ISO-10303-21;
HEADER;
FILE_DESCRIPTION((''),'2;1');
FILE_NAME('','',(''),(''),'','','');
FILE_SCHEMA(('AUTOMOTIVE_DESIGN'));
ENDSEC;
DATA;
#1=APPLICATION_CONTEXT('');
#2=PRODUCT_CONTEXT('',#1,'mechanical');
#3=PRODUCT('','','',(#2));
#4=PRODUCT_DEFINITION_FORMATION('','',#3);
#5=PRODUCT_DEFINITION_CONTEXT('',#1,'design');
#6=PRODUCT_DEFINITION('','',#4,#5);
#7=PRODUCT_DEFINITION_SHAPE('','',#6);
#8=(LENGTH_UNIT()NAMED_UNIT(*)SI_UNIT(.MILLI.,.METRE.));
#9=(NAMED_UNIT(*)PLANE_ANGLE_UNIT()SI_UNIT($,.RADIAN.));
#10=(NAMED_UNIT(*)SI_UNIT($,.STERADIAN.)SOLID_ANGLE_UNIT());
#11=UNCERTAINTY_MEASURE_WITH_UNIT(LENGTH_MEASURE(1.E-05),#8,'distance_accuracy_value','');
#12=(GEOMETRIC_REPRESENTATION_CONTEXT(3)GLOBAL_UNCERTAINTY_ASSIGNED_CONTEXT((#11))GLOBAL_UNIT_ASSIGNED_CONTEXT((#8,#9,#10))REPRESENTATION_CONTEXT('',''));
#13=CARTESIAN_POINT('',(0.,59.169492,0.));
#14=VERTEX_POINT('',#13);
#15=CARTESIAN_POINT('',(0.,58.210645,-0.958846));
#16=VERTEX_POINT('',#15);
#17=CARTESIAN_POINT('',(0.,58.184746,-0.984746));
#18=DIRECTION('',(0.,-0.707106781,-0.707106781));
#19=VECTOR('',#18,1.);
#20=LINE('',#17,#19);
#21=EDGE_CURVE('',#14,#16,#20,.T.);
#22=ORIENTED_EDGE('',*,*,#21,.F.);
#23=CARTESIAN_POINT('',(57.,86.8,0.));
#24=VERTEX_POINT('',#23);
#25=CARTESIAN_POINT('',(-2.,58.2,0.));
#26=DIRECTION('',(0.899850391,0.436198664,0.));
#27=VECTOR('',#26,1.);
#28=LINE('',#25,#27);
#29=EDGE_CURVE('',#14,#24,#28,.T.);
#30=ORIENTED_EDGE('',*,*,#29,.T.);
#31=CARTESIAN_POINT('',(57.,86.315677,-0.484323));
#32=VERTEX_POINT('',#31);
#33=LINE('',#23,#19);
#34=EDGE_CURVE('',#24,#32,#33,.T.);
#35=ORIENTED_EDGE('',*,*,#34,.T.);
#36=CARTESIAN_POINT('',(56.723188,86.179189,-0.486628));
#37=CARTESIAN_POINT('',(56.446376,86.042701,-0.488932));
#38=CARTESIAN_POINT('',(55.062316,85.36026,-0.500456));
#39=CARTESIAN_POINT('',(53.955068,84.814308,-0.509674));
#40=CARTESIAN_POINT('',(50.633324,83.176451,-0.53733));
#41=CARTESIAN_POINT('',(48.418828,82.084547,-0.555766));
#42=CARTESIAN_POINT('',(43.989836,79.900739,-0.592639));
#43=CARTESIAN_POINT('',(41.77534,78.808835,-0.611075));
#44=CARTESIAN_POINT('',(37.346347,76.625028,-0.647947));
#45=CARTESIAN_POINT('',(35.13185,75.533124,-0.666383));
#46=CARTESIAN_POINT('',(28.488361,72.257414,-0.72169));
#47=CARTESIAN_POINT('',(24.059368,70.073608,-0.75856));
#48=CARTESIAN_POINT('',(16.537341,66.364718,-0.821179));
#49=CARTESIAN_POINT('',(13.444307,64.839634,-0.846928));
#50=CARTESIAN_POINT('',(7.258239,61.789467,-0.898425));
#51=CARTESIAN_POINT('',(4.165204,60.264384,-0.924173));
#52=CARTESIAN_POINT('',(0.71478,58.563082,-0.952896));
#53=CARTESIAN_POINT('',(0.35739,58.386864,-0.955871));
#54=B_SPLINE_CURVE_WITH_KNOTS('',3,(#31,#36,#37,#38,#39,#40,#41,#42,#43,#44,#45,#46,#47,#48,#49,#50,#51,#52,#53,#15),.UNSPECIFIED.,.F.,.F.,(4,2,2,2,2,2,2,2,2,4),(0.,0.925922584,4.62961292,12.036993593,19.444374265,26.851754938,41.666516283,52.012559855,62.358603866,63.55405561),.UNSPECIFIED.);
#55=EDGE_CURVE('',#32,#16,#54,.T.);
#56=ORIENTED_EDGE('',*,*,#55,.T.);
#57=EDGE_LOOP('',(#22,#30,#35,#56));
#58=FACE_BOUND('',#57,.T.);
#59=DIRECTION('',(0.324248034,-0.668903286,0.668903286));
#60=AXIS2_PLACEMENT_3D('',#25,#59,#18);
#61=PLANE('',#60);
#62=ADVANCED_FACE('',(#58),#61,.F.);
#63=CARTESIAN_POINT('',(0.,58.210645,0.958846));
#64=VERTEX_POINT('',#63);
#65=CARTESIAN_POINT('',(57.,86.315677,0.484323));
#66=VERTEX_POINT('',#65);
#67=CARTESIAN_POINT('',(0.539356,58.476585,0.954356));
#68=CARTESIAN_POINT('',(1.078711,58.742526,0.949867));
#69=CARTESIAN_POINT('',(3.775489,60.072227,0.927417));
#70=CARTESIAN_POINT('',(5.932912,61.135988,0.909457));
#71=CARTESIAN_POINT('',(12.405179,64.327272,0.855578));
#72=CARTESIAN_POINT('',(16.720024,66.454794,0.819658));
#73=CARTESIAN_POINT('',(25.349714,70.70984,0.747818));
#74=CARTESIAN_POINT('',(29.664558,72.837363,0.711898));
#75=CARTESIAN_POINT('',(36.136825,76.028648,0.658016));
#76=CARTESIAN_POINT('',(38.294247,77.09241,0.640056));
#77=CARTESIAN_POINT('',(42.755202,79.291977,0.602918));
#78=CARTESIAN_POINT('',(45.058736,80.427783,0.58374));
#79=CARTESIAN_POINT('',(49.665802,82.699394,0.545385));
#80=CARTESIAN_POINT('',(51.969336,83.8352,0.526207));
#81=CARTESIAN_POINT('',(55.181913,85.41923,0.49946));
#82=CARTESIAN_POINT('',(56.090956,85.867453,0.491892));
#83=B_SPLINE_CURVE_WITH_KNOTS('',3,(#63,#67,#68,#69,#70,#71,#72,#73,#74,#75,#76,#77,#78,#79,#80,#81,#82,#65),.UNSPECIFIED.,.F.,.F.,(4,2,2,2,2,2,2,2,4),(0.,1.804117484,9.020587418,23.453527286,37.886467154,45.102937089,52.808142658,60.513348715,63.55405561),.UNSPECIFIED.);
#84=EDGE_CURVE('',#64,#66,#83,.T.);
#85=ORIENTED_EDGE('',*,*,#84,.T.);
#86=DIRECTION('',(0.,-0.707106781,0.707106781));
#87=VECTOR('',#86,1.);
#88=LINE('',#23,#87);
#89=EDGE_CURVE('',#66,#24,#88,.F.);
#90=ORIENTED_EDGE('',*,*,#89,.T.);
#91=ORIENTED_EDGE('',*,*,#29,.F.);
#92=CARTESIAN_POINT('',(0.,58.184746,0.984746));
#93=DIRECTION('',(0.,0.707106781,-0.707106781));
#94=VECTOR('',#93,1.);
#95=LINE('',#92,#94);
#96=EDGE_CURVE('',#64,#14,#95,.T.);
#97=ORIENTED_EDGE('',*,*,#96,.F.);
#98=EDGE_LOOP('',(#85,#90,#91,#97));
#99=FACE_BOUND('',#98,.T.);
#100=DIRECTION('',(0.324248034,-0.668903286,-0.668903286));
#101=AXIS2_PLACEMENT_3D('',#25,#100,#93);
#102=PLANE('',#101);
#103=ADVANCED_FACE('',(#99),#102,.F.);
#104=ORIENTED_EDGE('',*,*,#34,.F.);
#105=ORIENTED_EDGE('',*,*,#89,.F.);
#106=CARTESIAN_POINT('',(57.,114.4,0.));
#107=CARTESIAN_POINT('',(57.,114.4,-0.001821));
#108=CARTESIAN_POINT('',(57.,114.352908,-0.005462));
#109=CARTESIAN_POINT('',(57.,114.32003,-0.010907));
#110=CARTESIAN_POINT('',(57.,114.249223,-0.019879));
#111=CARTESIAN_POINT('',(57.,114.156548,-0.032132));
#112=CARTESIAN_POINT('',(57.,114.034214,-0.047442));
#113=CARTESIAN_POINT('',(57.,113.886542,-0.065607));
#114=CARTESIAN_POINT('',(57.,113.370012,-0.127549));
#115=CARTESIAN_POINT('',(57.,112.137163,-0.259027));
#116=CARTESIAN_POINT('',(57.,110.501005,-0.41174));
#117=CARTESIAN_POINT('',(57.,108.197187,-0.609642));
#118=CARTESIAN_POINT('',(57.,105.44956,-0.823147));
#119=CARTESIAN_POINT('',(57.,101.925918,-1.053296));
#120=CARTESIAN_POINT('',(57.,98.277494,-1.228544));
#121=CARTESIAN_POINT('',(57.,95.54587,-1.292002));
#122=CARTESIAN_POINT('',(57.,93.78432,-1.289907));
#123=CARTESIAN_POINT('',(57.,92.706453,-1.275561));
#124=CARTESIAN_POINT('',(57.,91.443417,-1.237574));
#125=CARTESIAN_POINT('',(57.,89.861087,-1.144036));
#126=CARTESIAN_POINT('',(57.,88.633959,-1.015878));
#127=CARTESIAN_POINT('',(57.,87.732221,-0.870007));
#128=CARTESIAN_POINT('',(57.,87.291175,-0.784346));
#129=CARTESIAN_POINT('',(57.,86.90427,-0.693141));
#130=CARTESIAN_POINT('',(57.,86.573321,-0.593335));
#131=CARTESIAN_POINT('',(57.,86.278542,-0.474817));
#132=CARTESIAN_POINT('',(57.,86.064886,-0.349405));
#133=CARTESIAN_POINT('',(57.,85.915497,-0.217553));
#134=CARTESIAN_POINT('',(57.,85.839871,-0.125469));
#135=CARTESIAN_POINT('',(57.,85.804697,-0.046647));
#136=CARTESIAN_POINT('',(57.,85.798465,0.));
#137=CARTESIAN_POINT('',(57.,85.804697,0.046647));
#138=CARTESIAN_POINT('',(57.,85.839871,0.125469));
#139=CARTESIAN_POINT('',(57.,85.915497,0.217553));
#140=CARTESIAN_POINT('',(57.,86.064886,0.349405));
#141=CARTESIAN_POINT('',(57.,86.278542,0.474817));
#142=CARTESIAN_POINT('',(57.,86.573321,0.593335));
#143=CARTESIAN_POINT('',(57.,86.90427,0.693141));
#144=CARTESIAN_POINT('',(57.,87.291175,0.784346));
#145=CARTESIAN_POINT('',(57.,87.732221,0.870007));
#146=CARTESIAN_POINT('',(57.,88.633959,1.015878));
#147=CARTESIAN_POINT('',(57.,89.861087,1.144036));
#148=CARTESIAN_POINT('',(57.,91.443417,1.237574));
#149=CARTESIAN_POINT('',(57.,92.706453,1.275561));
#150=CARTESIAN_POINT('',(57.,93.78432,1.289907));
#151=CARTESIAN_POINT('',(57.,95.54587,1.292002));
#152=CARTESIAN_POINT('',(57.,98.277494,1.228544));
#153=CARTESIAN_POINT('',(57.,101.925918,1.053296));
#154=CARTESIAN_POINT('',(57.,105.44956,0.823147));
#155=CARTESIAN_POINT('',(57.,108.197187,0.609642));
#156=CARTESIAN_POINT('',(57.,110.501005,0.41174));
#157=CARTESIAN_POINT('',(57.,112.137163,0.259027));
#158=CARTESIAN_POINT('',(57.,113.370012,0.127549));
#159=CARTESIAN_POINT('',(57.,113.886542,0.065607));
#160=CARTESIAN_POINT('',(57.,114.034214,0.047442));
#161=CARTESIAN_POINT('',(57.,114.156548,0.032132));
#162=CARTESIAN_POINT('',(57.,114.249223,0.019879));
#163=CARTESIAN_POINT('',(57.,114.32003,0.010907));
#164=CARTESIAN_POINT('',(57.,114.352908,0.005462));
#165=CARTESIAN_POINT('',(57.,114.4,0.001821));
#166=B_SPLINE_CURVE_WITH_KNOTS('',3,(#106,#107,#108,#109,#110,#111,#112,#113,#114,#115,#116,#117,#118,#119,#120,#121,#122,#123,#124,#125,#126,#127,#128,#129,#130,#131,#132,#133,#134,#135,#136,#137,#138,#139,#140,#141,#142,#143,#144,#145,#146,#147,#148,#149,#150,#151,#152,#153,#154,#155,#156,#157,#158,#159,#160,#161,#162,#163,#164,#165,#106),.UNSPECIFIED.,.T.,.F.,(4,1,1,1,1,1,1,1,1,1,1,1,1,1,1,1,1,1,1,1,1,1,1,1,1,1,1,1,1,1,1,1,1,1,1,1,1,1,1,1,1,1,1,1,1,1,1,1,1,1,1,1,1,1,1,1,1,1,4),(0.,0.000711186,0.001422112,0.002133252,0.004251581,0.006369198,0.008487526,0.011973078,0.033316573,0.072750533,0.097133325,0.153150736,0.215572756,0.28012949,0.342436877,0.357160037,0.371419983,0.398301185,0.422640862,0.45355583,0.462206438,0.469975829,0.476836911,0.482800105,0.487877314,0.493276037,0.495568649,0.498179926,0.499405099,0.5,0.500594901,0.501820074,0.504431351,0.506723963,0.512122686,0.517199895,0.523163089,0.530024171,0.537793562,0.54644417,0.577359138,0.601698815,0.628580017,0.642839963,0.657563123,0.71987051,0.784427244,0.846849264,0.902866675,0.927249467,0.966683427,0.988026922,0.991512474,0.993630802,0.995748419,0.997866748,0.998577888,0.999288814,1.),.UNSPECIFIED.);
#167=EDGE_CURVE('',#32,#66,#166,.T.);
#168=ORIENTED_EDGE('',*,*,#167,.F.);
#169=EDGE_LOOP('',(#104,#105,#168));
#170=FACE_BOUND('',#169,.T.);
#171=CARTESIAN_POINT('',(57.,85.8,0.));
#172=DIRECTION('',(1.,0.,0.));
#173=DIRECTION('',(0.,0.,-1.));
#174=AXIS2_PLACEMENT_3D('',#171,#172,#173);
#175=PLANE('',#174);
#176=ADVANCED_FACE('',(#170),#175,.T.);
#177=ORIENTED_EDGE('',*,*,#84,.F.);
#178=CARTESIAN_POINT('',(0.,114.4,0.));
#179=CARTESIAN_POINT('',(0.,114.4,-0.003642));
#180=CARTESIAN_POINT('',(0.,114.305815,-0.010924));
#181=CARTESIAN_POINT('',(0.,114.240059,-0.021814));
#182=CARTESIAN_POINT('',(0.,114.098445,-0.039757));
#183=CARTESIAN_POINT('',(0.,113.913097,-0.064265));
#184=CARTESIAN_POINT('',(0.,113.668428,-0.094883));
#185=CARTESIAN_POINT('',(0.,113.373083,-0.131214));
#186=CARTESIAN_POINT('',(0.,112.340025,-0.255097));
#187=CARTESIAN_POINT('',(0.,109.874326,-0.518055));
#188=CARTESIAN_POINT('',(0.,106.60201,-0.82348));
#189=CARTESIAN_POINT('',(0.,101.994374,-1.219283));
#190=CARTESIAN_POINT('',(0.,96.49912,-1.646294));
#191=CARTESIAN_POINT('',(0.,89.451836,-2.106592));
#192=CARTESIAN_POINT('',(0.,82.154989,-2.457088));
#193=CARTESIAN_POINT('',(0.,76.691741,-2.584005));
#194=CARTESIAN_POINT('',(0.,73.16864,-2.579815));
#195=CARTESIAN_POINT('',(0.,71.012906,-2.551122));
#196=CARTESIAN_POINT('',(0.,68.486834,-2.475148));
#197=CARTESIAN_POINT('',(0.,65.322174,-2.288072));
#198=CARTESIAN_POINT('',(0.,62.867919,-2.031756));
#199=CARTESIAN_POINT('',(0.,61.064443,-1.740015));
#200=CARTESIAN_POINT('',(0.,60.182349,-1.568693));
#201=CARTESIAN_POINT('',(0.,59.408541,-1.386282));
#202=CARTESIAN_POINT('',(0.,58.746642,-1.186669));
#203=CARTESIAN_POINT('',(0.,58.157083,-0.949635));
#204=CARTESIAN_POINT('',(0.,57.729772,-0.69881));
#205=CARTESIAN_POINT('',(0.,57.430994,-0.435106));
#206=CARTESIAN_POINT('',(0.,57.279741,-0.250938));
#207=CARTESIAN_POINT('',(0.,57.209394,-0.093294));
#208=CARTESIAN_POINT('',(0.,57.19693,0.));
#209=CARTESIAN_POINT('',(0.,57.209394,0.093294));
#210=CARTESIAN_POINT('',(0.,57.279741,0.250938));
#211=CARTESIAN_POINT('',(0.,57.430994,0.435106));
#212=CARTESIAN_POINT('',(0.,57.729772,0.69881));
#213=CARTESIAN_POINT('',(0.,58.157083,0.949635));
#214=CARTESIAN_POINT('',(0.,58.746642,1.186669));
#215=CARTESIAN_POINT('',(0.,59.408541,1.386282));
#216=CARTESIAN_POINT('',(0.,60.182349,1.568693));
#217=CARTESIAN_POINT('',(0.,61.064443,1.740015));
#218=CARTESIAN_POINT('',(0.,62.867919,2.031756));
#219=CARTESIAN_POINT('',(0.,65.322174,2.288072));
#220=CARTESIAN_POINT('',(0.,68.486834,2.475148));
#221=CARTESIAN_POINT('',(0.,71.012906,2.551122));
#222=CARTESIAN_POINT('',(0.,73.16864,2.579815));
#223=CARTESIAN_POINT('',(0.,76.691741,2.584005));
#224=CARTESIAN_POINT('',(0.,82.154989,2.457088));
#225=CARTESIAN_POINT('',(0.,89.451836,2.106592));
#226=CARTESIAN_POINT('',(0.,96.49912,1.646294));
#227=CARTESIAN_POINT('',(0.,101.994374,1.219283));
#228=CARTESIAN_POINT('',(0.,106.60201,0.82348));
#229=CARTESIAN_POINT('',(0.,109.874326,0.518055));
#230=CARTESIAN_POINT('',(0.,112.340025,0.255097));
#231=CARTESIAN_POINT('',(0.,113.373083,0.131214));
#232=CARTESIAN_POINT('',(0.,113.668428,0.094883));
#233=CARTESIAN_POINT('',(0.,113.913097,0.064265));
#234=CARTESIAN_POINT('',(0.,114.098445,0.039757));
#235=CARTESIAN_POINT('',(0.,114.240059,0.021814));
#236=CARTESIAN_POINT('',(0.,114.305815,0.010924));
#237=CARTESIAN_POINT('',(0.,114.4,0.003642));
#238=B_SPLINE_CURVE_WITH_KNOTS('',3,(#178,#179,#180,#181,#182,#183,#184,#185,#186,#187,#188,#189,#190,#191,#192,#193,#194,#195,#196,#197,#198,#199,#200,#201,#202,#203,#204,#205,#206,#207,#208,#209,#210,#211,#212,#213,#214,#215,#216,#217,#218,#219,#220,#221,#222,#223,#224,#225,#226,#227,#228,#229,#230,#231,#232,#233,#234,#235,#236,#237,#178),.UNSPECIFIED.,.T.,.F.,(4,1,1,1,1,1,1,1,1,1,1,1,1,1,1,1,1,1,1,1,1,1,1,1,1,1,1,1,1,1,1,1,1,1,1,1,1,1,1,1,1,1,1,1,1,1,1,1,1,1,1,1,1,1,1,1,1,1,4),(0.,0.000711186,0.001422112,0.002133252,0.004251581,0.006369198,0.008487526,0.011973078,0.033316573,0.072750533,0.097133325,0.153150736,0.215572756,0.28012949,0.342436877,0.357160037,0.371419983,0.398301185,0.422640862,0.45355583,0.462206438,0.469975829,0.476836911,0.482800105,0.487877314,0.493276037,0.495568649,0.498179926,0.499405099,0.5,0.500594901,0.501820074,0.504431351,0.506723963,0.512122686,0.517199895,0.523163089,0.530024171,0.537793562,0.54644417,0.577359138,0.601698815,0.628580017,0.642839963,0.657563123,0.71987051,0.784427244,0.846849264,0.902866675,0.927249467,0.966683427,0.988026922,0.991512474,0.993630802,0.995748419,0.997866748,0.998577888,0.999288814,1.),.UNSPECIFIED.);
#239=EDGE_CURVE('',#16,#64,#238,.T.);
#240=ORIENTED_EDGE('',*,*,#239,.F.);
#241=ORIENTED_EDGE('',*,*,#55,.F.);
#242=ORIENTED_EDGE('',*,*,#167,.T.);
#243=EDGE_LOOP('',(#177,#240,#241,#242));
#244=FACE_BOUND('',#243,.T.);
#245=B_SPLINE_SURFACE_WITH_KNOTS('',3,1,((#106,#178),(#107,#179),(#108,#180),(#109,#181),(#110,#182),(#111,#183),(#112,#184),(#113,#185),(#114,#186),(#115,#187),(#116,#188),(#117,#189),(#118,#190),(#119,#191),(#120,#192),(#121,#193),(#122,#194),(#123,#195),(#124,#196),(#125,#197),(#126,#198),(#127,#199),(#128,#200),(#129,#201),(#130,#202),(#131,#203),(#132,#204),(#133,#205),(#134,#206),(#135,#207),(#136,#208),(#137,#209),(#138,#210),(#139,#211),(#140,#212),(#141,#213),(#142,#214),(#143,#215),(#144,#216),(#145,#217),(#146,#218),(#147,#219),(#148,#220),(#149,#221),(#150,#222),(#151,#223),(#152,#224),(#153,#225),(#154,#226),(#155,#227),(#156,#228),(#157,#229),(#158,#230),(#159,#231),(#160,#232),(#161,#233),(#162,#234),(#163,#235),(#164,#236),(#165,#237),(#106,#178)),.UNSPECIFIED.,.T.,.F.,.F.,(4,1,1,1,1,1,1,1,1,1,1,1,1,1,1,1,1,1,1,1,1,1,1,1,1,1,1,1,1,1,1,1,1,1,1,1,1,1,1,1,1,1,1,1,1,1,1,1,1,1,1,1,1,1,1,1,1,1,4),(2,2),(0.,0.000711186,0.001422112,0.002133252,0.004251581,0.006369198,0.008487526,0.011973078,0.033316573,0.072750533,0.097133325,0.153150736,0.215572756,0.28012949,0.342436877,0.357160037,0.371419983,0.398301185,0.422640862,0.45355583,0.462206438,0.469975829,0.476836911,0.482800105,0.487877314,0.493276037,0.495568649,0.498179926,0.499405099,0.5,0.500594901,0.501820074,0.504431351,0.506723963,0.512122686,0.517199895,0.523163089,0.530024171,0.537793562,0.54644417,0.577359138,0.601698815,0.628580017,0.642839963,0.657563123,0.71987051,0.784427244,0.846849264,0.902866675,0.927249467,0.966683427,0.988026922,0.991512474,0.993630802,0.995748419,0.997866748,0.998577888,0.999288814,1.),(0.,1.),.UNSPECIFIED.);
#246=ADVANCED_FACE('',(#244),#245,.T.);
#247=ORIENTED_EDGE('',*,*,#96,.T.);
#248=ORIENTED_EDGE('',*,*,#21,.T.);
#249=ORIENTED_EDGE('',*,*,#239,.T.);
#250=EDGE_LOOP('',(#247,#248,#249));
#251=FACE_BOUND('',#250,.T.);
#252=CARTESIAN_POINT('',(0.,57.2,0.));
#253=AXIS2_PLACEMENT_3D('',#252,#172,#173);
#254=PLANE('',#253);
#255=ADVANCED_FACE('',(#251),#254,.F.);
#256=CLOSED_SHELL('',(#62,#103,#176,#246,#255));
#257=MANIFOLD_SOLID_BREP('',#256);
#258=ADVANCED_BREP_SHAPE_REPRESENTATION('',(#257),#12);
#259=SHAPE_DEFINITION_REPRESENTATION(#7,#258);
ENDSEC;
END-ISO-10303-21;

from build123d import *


with BuildPart() as part:
    # 边界1: read off the stored shape, not the designer's step
    # 边界1: loft between two sections, ruled curve by curve
    other_1_from = [
        Edge.make_bspline([(57, 114.4, 0), (57, 114.4, -0.001820958), (57, 114.352907673, -0.005462209), (57, 114.320029662, -0.010907062), (57, 114.249222739, -0.019878571), (57, 114.156548338, -0.032132456), (57, 114.034213823, -0.047441735), (57, 113.88654175, -0.065607247), (57, 113.370012427, -0.127548617), (57, 112.137163028, -0.259027461), (57, 110.501004902, -0.411740073), (57, 108.197187, -0.609641558), (57, 105.449560235, -0.823147067), (57, 101.925918142, -1.053296025), (57, 98.277494458, -1.228543839), (57, 95.54587026, -1.292002462), (57, 93.784319833, -1.289907394), (57, 92.706452955, -1.275561059), (57, 91.44341688, -1.237574119), (57, 89.861087122, -1.144036077), (57, 88.633959438, -1.015878162), (57, 87.732221341, -0.870007472), (57, 87.291174629, -0.784346378), (57, 86.904270346, -0.693141039), (57, 86.573320845, -0.593334554), (57, 86.278541554, -0.47481733), (57, 86.064886191, -0.349405025), (57, 85.915497173, -0.21755301), (57, 85.83987064, -0.125468872), (57, 85.804696915, -0.046646811), (57, 85.798464788, 0), (57, 85.804696915, 0.046646811), (57, 85.83987064, 0.125468872), (57, 85.915497173, 0.21755301), (57, 86.064886191, 0.349405025), (57, 86.278541554, 0.47481733), (57, 86.573320845, 0.593334554), (57, 86.904270346, 0.693141039), (57, 87.291174629, 0.784346378), (57, 87.732221341, 0.870007472), (57, 88.633959438, 1.015878162), (57, 89.861087122, 1.144036077), (57, 91.44341688, 1.237574119), (57, 92.706452955, 1.275561059), (57, 93.784319833, 1.289907394), (57, 95.54587026, 1.292002462), (57, 98.277494458, 1.228543839), (57, 101.925918142, 1.053296025), (57, 105.449560235, 0.823147067), (57, 108.197187, 0.609641558), (57, 110.501004902, 0.411740073), (57, 112.137163028, 0.259027461), (57, 113.370012427, 0.127548617), (57, 113.88654175, 0.065607247), (57, 114.034213823, 0.047441735), (57, 114.156548338, 0.032132456), (57, 114.249222739, 0.019878571), (57, 114.320029662, 0.010907062), (57, 114.352907673, 0.005462209), (57, 114.4, 0.001820958), (57, 114.4, 0)], [0, 0, 0, 0, 0.000711186, 0.001422112, 0.002133252, 0.004251581, 0.006369198, 0.008487526, 0.011973078, 0.033316573, 0.072750533, 0.097133325, 0.153150736, 0.215572756, 0.28012949, 0.342436877, 0.357160037, 0.371419983, 0.398301185, 0.422640862, 0.45355583, 0.462206438, 0.469975829, 0.476836911, 0.482800105, 0.487877314, 0.493276037, 0.495568649, 0.498179926, 0.499405099, 0.5, 0.500594901, 0.501820074, 0.504431351, 0.506723963, 0.512122686, 0.517199895, 0.523163089, 0.530024171, 0.537793562, 0.54644417, 0.577359138, 0.601698815, 0.628580017, 0.642839963, 0.657563123, 0.71987051, 0.784427244, 0.846849264, 0.902866675, 0.927249467, 0.966683427, 0.988026922, 0.991512474, 0.993630802, 0.995748419, 0.997866748, 0.998577888, 0.999288814, 1, 1, 1, 1], 3),
    ]
    other_1_to = [
        Edge.make_bspline([(0, 114.4, 0), (0, 114.4, -0.003641916), (0, 114.305815345, -0.010924418), (0, 114.240059323, -0.021814123), (0, 114.098445477, -0.039757143), (0, 113.913096675, -0.064264912), (0, 113.668427647, -0.09488347), (0, 113.3730835, -0.131214495), (0, 112.340024854, -0.255097235), (0, 109.874326056, -0.518054923), (0, 106.602009805, -0.823480147), (0, 101.994374001, -1.219283117), (0, 96.499120471, -1.646294135), (0, 89.451836285, -2.106592051), (0, 82.154988917, -2.457087677), (0, 76.69174052, -2.584004925), (0, 73.168639667, -2.579814789), (0, 71.01290591, -2.551122119), (0, 68.486833761, -2.475148238), (0, 65.322174244, -2.288072154), (0, 62.867918876, -2.031756324), (0, 61.064442682, -1.740014943), (0, 60.182349259, -1.568692756), (0, 59.408540691, -1.386282078), (0, 58.746641691, -1.186669108), (0, 58.157083107, -0.949634659), (0, 57.729772382, -0.698810051), (0, 57.430994345, -0.43510602), (0, 57.27974128, -0.250937745), (0, 57.209393829, -0.093293621), (0, 57.196929575, 0), (0, 57.209393829, 0.093293621), (0, 57.27974128, 0.250937745), (0, 57.430994345, 0.43510602), (0, 57.729772382, 0.698810051), (0, 58.157083107, 0.949634659), (0, 58.746641691, 1.186669108), (0, 59.408540691, 1.386282078), (0, 60.182349259, 1.568692756), (0, 61.064442682, 1.740014943), (0, 62.867918876, 2.031756324), (0, 65.322174244, 2.288072154), (0, 68.486833761, 2.475148238), (0, 71.01290591, 2.551122119), (0, 73.168639667, 2.579814789), (0, 76.69174052, 2.584004925), (0, 82.154988917, 2.457087677), (0, 89.451836285, 2.106592051), (0, 96.499120471, 1.646294135), (0, 101.994374001, 1.219283117), (0, 106.602009805, 0.823480147), (0, 109.874326056, 0.518054923), (0, 112.340024854, 0.255097235), (0, 113.3730835, 0.131214495), (0, 113.668427647, 0.09488347), (0, 113.913096675, 0.064264912), (0, 114.098445477, 0.039757143), (0, 114.240059323, 0.021814123), (0, 114.305815345, 0.010924418), (0, 114.4, 0.003641916), (0, 114.4, 0)], [0, 0, 0, 0, 0.000711186, 0.001422112, 0.002133252, 0.004251581, 0.006369198, 0.008487526, 0.011973078, 0.033316573, 0.072750533, 0.097133325, 0.153150736, 0.215572756, 0.28012949, 0.342436877, 0.357160037, 0.371419983, 0.398301185, 0.422640862, 0.45355583, 0.462206438, 0.469975829, 0.476836911, 0.482800105, 0.487877314, 0.493276037, 0.495568649, 0.498179926, 0.499405099, 0.5, 0.500594901, 0.501820074, 0.504431351, 0.506723963, 0.512122686, 0.517199895, 0.523163089, 0.530024171, 0.537793562, 0.54644417, 0.577359138, 0.601698815, 0.628580017, 0.642839963, 0.657563123, 0.71987051, 0.784427244, 0.846849264, 0.902866675, 0.927249467, 0.966683427, 0.988026922, 0.991512474, 0.993630802, 0.995748419, 0.997866748, 0.998577888, 0.999288814, 1, 1, 1, 1], 3),
    ]
    other_1 = Solid(Shell([*[Face.make_surface_from_curves(other_1_from[k], other_1_to[k]) for k in range(1)], Face(Wire(other_1_from)), Face(Wire(other_1_to))]))
    add(other_1)

    # 切除-扫描1: sweep along a path in 草图6
    with BuildLine(Plane.XY) as sweep_1_path:
        Line((0, -20), (59.000000002, 8.600000001))
    # 草图12 → 切除-扫描1 (sweep, cut)
    with BuildSketch(Plane(origin=(57, 0, 0), x_dir=(0, 0, -1), z_dir=(1, 0, 0))):
        Polygon((0, 86.8), (-2.862951618, 83.937048382), (-2.862951618, 173.459074824), (3.297160532, 173.459074824), (3.297160532, 83.502839468), align=None)
    sweep(path=sweep_1_path.line, mode=Mode.SUBTRACT)


solid = part.part
